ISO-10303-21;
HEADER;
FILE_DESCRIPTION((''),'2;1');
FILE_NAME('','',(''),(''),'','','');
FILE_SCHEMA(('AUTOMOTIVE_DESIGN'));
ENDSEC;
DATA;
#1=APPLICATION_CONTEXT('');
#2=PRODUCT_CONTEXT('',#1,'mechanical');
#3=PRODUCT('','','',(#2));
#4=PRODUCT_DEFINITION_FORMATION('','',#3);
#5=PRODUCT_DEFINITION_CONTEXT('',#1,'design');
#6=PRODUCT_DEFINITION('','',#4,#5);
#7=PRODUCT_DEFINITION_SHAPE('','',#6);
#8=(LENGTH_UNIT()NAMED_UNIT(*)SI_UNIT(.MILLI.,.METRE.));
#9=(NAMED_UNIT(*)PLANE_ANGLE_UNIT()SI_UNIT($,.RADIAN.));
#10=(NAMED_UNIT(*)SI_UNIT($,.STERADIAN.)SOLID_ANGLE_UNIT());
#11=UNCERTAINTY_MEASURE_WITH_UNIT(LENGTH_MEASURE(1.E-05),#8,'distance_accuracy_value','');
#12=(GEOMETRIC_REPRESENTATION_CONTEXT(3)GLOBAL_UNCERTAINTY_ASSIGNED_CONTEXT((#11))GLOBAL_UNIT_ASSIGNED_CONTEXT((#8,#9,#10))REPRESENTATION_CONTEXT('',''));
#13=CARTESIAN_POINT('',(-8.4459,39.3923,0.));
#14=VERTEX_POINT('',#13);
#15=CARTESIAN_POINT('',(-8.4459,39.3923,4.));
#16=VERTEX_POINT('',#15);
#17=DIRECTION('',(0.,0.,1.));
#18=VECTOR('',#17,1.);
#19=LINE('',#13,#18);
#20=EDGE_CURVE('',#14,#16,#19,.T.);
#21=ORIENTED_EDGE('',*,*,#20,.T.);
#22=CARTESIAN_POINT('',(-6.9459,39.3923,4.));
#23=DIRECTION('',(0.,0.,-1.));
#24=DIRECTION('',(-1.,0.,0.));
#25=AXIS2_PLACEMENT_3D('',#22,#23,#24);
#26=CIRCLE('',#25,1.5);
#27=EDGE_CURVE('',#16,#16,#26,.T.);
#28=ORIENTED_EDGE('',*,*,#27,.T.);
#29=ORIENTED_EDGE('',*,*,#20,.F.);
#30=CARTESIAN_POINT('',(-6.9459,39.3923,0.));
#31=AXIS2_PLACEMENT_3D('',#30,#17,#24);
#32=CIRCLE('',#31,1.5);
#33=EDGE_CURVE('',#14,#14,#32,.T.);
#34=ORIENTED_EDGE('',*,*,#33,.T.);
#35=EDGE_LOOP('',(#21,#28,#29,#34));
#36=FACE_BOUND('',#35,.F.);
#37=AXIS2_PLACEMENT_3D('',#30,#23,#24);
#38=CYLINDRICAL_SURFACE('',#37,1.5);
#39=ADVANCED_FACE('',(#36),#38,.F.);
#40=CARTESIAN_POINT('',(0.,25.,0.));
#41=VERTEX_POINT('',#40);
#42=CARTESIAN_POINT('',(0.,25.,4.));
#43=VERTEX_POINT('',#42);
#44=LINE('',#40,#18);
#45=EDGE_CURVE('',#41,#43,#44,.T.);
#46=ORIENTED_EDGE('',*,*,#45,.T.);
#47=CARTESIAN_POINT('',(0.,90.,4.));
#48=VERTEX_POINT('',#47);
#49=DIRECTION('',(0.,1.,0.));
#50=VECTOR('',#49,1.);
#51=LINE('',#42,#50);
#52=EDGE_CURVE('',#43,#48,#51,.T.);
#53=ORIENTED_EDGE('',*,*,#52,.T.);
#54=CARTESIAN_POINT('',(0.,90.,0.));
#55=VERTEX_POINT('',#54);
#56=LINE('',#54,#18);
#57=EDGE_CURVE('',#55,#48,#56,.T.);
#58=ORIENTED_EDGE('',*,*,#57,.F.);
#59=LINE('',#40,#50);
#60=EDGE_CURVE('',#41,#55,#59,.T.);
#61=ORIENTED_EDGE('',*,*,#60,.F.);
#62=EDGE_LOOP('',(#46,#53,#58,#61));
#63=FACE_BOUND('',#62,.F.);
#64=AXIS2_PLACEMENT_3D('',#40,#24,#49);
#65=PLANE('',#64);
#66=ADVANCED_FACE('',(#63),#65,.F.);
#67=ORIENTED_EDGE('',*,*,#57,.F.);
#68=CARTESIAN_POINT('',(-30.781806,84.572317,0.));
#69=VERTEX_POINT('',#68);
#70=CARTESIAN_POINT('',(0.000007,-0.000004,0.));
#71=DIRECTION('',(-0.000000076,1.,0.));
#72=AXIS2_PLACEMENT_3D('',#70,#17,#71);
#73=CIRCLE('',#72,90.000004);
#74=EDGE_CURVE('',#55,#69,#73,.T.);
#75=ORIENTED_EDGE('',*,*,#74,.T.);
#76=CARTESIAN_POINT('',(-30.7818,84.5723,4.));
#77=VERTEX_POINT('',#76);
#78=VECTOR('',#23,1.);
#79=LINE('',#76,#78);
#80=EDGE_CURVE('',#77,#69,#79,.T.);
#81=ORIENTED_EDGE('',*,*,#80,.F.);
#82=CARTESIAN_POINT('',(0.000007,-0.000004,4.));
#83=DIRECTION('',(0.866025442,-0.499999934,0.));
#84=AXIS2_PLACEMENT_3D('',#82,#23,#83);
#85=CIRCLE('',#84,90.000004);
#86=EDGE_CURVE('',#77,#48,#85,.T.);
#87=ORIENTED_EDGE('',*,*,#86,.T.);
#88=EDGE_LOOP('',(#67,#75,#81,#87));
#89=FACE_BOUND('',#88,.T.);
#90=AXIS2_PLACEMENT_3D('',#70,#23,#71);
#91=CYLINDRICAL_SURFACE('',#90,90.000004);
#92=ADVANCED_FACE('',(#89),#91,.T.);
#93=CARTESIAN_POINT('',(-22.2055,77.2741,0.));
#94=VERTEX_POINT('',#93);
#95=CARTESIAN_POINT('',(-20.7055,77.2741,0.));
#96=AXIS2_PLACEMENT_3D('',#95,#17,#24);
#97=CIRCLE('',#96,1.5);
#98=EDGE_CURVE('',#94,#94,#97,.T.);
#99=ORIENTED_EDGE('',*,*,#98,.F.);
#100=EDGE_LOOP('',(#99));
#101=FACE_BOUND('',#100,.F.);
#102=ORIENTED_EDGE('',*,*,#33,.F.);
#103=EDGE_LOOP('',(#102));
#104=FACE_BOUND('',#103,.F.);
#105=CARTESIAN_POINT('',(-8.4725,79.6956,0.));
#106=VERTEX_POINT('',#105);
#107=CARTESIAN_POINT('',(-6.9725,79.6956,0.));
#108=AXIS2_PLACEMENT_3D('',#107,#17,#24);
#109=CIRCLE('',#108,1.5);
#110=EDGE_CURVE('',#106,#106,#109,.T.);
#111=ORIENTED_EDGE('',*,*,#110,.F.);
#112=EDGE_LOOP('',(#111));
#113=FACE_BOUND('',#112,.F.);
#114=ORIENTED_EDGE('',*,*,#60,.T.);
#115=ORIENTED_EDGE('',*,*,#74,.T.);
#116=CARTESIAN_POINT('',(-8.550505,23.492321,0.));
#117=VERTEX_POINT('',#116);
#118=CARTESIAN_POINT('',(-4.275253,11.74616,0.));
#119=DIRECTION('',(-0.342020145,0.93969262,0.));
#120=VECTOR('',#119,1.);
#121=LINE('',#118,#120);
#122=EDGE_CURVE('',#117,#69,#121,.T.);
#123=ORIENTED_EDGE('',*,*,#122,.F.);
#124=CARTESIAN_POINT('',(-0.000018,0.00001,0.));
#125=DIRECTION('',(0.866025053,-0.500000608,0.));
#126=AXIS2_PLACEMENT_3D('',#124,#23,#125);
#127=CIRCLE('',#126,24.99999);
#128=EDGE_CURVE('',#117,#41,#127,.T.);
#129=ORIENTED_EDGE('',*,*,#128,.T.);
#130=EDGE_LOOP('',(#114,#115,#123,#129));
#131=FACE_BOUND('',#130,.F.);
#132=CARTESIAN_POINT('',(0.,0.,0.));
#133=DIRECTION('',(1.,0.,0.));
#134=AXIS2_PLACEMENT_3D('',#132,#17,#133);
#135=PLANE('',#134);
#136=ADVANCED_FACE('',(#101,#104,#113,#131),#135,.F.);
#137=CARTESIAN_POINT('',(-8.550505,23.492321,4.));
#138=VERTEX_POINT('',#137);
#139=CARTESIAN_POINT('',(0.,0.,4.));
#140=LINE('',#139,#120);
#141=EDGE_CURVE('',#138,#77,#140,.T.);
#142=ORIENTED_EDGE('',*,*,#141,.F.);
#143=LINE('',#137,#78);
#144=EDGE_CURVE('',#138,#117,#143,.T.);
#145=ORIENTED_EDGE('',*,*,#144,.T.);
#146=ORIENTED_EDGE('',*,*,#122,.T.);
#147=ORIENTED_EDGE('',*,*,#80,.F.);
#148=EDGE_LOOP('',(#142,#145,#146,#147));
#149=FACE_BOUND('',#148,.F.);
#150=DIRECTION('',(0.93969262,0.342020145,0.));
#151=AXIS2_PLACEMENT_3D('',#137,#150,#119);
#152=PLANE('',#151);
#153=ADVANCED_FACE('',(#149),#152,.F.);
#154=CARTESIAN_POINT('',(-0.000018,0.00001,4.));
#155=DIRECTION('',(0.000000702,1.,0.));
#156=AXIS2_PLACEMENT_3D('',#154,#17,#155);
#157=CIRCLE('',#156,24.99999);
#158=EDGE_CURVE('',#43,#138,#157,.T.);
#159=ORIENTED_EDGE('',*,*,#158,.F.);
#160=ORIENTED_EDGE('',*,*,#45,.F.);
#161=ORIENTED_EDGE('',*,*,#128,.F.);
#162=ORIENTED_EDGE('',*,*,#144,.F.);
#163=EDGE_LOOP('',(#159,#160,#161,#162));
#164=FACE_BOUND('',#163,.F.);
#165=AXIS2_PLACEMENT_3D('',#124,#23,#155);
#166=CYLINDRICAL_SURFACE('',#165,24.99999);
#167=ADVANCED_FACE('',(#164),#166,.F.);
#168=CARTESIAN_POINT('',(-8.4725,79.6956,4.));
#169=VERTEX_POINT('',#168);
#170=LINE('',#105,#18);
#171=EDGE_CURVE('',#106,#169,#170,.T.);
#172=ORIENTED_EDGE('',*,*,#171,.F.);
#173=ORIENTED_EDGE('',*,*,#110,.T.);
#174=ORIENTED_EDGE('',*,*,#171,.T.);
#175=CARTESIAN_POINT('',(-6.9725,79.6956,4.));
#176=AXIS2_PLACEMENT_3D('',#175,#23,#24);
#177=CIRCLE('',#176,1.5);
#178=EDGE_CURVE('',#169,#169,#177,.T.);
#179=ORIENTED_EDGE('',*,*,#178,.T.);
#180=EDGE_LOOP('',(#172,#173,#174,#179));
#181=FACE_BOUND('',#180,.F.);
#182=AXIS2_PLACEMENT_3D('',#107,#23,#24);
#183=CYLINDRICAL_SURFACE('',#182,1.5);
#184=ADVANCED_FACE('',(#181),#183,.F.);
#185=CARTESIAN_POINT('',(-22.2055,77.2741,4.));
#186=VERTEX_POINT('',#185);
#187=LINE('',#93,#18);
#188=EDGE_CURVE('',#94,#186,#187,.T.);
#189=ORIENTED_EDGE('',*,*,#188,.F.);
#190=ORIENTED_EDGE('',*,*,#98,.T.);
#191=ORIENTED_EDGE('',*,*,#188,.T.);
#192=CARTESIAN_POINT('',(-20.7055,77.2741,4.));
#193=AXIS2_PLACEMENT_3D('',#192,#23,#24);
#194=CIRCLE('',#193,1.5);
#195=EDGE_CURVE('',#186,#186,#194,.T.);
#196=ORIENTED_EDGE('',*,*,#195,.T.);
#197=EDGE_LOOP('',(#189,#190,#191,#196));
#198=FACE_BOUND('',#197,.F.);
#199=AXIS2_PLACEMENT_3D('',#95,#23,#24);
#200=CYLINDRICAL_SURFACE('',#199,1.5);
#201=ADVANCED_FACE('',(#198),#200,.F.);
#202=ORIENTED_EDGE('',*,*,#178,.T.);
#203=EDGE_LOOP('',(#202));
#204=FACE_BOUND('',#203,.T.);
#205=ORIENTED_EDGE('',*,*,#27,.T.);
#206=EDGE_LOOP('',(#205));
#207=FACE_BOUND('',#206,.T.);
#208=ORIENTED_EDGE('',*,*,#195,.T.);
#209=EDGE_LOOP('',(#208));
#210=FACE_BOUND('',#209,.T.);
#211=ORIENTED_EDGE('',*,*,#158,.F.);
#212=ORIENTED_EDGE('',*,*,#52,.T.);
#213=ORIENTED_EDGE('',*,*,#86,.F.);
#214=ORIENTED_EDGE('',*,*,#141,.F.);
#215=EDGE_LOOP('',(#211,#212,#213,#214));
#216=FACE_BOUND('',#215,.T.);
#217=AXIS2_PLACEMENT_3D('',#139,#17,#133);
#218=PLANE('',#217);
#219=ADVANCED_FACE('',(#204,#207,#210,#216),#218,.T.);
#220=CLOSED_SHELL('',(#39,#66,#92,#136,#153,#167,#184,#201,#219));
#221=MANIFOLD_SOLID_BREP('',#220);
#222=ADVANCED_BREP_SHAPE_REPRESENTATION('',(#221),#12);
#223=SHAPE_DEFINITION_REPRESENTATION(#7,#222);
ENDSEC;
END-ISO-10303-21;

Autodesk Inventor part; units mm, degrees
ref_plane "YZ Plane" through (0, 0, 0) normal (1, 0, 0) x (0, 1, 0)
ref_plane "XZ Plane" through (0, 0, 0) normal (0, 1, 0) x (-1, 0, 0)
ref_plane "XY Plane" through (0, 0, 0) normal (0, 0, 1) x (1, 0, 0)
sketch "Sketch1" plane through (0, 0, 0) normal (0, 0, 1) x (1, 0, 0)
  arc A0 (0, 90) -> (77.9423, -45) centre (0, 0) ccw
  arc A1 (0, 25) -> (21.6506, -12.5) centre (0, 0) ccw
  line L0 (0, 25) -> (0, 90)
  line L1 (77.9423, -45) -> (21.6506, -12.5)
  line L2 (0, 25) -> (0, 0)
  line L3 (0, 0) -> (21.6506, -12.5)
  line L4 (0, -167.6192) -> (0, 145.1192) projected
  dimension "d0" = 120
  dimension "d1" = 25
  dimension "d2" = 90
extrude "Extrusion1" add sketch "Sketch1" along normal blind 4 contours L0 A1 L4 A0 | L4 A1 L1 A0
sketch "Sketch2" plane through (0, 0, 0) normal (0, 0, -1) x (-1, 0, 0)
  circle A0 centre (6.9725, 79.6956) radius 1.5
  circle A1 centre (20.7055, 77.2741) radius 1.5
  circle A2 centre (6.9459, 39.3923) radius 1.5
  line L0 (6.9725, 79.6956) -> (0, 0)
  line L1 (0, 0) -> (6.9459, 39.3923)
  line L2 (20.7055, 77.2741) -> (0, 0)
  line L3 (0, 25) -> (0, 90) projected
  dimension "d14" = 3
  dimension "d15" = 3
  dimension "d16" = 3
  dimension "d17" = 80
  dimension "d18" = 80
  dimension "d19" = 40
  dimension "d20" = 10
  dimension "d21" = 5
  dimension "d22" = 15
extrude "Extrusion2" cut sketch "Sketch2" against normal blind 10
pattern_circular "Circular Pattern1" count 12 over 220 about axis through (0, 0, 0) along (0, 0, 1) of "Extrusion2"
sketch "Sketch3" plane through (0, 0, 4) normal (0, 0, 1) x (1, 0, 0)
  point P0 (0, 0)
sketch "Sketch4" plane through (0, 0, 4) normal (0, 0, 1) x (1, 0, 0)
  arc A0 (0, 25) -> (21.6506, -12.5) centre (0, 0) ccw projected
  line L0 (0, 0) -> (-30.7818, 84.5723)
  line L1 (0, 25) -> (0, 90) projected
  line L2 (0, 0) -> (77.9423, -45)
  arc A1 (-30.7818, 84.5723) -> (77.9423, -45) centre (0, 0) ccw
  point P0 (21.6506, -12.5)
  point P1 (-8.5505, 23.4923)
  dimension "d29" = 20
extrude "Extrusion3" cut sketch "Sketch4" against normal blind 10 contours A0 L2 A1 L0
properties part number "cover"
